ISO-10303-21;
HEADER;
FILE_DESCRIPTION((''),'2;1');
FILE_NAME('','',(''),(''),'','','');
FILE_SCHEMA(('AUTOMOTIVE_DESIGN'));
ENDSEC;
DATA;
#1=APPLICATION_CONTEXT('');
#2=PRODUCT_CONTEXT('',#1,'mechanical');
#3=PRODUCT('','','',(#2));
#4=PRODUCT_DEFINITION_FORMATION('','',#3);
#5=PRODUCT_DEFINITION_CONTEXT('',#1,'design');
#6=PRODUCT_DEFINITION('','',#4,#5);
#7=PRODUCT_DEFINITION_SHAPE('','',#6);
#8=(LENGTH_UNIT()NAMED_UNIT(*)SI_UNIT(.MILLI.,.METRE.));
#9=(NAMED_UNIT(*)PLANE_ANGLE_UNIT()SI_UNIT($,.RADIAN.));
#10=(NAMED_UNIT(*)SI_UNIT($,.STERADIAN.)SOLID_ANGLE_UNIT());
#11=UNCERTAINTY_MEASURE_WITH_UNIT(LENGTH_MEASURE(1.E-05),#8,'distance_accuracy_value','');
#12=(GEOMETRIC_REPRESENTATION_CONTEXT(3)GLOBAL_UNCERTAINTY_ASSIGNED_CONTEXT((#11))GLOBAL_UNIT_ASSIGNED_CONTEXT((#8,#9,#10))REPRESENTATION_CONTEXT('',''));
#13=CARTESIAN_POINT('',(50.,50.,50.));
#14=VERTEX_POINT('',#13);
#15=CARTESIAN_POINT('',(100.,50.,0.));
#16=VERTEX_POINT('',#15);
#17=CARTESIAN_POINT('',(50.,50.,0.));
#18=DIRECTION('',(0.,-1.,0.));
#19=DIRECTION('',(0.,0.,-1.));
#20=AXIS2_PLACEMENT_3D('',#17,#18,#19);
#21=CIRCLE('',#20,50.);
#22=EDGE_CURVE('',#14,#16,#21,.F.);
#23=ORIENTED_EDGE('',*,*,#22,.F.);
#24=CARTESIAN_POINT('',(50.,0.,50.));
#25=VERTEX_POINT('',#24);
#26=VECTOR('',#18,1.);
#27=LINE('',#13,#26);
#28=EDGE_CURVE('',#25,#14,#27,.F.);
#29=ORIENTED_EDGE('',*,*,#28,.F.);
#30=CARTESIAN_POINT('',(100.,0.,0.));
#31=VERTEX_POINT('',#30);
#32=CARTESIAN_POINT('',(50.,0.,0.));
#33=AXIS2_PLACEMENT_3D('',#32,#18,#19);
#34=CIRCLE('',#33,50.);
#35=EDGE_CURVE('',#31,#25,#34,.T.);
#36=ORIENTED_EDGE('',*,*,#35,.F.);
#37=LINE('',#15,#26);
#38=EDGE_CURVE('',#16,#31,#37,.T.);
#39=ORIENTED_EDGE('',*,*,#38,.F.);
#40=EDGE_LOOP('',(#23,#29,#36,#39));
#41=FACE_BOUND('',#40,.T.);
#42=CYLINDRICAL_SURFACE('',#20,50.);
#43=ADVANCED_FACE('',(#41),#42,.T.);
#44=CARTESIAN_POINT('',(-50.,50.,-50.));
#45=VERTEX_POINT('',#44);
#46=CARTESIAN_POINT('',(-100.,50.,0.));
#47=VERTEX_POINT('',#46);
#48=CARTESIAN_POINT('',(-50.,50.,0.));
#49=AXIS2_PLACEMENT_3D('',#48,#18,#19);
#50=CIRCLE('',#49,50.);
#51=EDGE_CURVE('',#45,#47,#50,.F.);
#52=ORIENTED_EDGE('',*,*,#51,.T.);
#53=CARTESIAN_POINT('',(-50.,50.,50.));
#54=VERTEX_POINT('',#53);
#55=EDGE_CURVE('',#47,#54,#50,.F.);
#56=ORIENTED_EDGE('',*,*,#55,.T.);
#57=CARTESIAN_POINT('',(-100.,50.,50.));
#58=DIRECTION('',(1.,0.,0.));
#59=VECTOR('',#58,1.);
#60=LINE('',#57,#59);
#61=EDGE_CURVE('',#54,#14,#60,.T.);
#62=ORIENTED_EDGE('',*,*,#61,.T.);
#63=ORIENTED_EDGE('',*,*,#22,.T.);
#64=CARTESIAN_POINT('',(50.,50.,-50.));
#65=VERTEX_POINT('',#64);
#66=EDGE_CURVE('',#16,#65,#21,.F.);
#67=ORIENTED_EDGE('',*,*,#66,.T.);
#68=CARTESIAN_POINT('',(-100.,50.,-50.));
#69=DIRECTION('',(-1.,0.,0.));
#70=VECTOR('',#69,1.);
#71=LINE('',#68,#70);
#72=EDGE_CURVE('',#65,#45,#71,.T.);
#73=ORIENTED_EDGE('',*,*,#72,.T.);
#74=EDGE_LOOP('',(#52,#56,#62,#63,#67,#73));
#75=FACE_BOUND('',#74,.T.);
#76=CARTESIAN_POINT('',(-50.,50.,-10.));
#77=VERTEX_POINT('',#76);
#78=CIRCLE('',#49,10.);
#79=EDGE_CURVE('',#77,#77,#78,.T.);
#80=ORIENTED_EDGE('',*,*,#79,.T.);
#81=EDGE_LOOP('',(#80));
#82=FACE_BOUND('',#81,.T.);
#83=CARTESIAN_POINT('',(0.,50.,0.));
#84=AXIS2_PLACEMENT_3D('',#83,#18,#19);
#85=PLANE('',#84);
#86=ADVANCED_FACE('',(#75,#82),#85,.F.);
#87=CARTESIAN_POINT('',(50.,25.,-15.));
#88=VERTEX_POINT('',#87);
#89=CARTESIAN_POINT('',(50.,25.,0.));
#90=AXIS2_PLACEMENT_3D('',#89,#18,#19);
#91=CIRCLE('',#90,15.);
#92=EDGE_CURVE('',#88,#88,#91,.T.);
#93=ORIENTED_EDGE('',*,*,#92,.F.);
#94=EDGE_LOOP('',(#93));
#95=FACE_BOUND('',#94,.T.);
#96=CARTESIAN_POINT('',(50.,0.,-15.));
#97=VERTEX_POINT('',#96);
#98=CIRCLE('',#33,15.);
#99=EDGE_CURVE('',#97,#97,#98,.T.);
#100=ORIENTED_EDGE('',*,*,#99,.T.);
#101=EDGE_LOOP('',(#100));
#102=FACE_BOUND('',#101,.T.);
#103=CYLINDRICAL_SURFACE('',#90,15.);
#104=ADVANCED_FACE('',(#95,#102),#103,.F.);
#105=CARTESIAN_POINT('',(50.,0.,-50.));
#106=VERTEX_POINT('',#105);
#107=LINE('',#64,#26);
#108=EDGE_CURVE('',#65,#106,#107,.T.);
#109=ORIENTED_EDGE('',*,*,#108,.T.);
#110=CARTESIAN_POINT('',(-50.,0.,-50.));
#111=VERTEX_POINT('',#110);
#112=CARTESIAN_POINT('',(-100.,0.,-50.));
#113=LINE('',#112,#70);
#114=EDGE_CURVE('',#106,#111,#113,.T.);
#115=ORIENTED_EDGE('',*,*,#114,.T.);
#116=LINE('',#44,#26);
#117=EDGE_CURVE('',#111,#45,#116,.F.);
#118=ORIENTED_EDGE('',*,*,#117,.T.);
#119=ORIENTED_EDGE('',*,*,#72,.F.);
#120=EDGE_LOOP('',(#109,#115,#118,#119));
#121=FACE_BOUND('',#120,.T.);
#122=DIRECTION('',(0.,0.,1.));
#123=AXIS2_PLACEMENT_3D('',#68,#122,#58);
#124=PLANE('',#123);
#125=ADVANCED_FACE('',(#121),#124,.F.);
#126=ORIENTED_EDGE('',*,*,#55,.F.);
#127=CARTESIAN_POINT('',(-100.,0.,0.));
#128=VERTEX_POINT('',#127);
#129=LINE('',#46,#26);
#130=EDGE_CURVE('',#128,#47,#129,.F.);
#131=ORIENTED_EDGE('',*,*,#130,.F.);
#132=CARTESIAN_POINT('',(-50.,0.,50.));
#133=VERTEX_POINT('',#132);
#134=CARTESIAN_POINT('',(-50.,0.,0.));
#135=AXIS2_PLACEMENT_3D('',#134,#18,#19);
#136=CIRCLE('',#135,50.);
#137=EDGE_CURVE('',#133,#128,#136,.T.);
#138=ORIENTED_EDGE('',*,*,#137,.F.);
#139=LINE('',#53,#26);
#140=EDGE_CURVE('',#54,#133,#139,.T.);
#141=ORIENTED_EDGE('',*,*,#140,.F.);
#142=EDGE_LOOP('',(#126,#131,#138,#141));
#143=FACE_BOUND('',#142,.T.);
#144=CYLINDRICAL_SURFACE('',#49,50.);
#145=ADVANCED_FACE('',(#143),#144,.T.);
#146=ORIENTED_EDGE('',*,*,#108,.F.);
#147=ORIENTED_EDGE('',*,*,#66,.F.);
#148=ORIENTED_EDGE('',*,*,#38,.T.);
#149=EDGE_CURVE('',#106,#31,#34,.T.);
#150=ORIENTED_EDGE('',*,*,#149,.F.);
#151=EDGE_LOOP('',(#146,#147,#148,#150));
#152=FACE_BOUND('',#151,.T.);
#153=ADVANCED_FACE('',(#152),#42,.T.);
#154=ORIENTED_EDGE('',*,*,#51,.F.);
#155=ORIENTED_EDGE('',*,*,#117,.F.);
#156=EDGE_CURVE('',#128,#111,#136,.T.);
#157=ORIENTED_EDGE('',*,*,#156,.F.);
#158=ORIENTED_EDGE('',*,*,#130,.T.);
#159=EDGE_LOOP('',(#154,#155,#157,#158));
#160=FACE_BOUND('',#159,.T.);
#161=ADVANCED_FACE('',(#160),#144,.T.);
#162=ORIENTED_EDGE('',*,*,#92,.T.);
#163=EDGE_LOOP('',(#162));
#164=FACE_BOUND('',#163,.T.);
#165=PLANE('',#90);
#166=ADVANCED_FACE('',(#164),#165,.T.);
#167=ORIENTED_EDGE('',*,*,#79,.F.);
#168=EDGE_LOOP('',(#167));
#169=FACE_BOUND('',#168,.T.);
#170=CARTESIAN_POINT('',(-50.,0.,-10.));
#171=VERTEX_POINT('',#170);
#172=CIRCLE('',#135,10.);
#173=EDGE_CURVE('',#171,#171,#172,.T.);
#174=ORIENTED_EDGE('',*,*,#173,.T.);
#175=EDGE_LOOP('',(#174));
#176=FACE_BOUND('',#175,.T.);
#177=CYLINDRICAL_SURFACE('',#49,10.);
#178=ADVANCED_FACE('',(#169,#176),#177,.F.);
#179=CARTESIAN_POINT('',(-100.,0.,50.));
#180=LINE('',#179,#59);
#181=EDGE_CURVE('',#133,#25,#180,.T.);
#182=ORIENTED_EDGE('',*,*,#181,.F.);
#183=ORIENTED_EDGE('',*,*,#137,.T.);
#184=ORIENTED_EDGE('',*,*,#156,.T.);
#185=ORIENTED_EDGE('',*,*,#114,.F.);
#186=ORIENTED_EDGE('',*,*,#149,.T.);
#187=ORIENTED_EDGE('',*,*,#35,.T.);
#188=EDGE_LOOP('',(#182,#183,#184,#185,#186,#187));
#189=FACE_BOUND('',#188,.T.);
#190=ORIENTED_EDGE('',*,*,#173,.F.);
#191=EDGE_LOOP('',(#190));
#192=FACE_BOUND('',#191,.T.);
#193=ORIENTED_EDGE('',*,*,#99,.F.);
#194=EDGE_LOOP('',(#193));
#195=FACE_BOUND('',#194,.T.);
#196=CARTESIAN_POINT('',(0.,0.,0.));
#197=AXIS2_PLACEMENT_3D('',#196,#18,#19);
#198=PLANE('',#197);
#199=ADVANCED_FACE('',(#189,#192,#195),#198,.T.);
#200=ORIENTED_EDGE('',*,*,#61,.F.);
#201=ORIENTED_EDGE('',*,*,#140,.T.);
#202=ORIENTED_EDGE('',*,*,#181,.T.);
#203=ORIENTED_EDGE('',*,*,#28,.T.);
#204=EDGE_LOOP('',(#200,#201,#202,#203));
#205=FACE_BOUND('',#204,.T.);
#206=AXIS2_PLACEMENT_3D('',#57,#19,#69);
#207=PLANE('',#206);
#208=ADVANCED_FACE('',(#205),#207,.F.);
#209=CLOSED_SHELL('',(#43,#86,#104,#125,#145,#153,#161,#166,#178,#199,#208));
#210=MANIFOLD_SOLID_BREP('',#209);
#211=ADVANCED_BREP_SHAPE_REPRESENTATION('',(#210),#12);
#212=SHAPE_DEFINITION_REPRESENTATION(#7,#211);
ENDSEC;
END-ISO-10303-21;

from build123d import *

# Parameters (mm, degrees)
ESBO_O2_W                = 200
ESBO_O2_H                = 100
RESSALTO_EXTRUS_O1_DEPTH = 50
FILETE1_R                = 50
ESBO_O3_R                = 15
CORTE_EXTRUS_O1_DEPTH    = 25
ESBO_O4_R                = 10
CORTE_EXTRUS_O2_DEPTH    = 123.474487139


with BuildPart() as part:
    # Esboço2 → Ressalto-extrusão1 (new body)
    with BuildSketch(Plane(origin=(0, 0, 0), x_dir=(1, 0, 0), z_dir=(0, 1, 0))):
        Rectangle(ESBO_O2_W, ESBO_O2_H)
    extrude(amount=RESSALTO_EXTRUS_O1_DEPTH)

    # Filete1
    filete1_edges = [part.edges().sort_by_distance(p)[0] for p in [
        (100, 25, -50),
        (100, 25, 50),
        (-100, 25, -50),
        (-100, 25, 50),
    ]]
    fillet(filete1_edges, radius=FILETE1_R - 0.0001)  # a hair under: the kernel refuses the full size

    # Esboço3 → Corte-extrusão1 (cut)
    with BuildSketch(Plane.XZ):
        with Locations(Location((50, 0, 0), (0, 0, 270))):
            Circle(ESBO_O3_R)
    extrude(amount=-CORTE_EXTRUS_O1_DEPTH, mode=Mode.SUBTRACT)

    # Esboço4 → Corte-extrusão2 (cut, through all)
    with BuildSketch(Plane.XZ):
        with Locations(Location((-50, 0, 0), (0, 0, 270))):
            Circle(ESBO_O4_R)
    extrude(amount=-CORTE_EXTRUS_O2_DEPTH, mode=Mode.SUBTRACT)


solid = part.part
